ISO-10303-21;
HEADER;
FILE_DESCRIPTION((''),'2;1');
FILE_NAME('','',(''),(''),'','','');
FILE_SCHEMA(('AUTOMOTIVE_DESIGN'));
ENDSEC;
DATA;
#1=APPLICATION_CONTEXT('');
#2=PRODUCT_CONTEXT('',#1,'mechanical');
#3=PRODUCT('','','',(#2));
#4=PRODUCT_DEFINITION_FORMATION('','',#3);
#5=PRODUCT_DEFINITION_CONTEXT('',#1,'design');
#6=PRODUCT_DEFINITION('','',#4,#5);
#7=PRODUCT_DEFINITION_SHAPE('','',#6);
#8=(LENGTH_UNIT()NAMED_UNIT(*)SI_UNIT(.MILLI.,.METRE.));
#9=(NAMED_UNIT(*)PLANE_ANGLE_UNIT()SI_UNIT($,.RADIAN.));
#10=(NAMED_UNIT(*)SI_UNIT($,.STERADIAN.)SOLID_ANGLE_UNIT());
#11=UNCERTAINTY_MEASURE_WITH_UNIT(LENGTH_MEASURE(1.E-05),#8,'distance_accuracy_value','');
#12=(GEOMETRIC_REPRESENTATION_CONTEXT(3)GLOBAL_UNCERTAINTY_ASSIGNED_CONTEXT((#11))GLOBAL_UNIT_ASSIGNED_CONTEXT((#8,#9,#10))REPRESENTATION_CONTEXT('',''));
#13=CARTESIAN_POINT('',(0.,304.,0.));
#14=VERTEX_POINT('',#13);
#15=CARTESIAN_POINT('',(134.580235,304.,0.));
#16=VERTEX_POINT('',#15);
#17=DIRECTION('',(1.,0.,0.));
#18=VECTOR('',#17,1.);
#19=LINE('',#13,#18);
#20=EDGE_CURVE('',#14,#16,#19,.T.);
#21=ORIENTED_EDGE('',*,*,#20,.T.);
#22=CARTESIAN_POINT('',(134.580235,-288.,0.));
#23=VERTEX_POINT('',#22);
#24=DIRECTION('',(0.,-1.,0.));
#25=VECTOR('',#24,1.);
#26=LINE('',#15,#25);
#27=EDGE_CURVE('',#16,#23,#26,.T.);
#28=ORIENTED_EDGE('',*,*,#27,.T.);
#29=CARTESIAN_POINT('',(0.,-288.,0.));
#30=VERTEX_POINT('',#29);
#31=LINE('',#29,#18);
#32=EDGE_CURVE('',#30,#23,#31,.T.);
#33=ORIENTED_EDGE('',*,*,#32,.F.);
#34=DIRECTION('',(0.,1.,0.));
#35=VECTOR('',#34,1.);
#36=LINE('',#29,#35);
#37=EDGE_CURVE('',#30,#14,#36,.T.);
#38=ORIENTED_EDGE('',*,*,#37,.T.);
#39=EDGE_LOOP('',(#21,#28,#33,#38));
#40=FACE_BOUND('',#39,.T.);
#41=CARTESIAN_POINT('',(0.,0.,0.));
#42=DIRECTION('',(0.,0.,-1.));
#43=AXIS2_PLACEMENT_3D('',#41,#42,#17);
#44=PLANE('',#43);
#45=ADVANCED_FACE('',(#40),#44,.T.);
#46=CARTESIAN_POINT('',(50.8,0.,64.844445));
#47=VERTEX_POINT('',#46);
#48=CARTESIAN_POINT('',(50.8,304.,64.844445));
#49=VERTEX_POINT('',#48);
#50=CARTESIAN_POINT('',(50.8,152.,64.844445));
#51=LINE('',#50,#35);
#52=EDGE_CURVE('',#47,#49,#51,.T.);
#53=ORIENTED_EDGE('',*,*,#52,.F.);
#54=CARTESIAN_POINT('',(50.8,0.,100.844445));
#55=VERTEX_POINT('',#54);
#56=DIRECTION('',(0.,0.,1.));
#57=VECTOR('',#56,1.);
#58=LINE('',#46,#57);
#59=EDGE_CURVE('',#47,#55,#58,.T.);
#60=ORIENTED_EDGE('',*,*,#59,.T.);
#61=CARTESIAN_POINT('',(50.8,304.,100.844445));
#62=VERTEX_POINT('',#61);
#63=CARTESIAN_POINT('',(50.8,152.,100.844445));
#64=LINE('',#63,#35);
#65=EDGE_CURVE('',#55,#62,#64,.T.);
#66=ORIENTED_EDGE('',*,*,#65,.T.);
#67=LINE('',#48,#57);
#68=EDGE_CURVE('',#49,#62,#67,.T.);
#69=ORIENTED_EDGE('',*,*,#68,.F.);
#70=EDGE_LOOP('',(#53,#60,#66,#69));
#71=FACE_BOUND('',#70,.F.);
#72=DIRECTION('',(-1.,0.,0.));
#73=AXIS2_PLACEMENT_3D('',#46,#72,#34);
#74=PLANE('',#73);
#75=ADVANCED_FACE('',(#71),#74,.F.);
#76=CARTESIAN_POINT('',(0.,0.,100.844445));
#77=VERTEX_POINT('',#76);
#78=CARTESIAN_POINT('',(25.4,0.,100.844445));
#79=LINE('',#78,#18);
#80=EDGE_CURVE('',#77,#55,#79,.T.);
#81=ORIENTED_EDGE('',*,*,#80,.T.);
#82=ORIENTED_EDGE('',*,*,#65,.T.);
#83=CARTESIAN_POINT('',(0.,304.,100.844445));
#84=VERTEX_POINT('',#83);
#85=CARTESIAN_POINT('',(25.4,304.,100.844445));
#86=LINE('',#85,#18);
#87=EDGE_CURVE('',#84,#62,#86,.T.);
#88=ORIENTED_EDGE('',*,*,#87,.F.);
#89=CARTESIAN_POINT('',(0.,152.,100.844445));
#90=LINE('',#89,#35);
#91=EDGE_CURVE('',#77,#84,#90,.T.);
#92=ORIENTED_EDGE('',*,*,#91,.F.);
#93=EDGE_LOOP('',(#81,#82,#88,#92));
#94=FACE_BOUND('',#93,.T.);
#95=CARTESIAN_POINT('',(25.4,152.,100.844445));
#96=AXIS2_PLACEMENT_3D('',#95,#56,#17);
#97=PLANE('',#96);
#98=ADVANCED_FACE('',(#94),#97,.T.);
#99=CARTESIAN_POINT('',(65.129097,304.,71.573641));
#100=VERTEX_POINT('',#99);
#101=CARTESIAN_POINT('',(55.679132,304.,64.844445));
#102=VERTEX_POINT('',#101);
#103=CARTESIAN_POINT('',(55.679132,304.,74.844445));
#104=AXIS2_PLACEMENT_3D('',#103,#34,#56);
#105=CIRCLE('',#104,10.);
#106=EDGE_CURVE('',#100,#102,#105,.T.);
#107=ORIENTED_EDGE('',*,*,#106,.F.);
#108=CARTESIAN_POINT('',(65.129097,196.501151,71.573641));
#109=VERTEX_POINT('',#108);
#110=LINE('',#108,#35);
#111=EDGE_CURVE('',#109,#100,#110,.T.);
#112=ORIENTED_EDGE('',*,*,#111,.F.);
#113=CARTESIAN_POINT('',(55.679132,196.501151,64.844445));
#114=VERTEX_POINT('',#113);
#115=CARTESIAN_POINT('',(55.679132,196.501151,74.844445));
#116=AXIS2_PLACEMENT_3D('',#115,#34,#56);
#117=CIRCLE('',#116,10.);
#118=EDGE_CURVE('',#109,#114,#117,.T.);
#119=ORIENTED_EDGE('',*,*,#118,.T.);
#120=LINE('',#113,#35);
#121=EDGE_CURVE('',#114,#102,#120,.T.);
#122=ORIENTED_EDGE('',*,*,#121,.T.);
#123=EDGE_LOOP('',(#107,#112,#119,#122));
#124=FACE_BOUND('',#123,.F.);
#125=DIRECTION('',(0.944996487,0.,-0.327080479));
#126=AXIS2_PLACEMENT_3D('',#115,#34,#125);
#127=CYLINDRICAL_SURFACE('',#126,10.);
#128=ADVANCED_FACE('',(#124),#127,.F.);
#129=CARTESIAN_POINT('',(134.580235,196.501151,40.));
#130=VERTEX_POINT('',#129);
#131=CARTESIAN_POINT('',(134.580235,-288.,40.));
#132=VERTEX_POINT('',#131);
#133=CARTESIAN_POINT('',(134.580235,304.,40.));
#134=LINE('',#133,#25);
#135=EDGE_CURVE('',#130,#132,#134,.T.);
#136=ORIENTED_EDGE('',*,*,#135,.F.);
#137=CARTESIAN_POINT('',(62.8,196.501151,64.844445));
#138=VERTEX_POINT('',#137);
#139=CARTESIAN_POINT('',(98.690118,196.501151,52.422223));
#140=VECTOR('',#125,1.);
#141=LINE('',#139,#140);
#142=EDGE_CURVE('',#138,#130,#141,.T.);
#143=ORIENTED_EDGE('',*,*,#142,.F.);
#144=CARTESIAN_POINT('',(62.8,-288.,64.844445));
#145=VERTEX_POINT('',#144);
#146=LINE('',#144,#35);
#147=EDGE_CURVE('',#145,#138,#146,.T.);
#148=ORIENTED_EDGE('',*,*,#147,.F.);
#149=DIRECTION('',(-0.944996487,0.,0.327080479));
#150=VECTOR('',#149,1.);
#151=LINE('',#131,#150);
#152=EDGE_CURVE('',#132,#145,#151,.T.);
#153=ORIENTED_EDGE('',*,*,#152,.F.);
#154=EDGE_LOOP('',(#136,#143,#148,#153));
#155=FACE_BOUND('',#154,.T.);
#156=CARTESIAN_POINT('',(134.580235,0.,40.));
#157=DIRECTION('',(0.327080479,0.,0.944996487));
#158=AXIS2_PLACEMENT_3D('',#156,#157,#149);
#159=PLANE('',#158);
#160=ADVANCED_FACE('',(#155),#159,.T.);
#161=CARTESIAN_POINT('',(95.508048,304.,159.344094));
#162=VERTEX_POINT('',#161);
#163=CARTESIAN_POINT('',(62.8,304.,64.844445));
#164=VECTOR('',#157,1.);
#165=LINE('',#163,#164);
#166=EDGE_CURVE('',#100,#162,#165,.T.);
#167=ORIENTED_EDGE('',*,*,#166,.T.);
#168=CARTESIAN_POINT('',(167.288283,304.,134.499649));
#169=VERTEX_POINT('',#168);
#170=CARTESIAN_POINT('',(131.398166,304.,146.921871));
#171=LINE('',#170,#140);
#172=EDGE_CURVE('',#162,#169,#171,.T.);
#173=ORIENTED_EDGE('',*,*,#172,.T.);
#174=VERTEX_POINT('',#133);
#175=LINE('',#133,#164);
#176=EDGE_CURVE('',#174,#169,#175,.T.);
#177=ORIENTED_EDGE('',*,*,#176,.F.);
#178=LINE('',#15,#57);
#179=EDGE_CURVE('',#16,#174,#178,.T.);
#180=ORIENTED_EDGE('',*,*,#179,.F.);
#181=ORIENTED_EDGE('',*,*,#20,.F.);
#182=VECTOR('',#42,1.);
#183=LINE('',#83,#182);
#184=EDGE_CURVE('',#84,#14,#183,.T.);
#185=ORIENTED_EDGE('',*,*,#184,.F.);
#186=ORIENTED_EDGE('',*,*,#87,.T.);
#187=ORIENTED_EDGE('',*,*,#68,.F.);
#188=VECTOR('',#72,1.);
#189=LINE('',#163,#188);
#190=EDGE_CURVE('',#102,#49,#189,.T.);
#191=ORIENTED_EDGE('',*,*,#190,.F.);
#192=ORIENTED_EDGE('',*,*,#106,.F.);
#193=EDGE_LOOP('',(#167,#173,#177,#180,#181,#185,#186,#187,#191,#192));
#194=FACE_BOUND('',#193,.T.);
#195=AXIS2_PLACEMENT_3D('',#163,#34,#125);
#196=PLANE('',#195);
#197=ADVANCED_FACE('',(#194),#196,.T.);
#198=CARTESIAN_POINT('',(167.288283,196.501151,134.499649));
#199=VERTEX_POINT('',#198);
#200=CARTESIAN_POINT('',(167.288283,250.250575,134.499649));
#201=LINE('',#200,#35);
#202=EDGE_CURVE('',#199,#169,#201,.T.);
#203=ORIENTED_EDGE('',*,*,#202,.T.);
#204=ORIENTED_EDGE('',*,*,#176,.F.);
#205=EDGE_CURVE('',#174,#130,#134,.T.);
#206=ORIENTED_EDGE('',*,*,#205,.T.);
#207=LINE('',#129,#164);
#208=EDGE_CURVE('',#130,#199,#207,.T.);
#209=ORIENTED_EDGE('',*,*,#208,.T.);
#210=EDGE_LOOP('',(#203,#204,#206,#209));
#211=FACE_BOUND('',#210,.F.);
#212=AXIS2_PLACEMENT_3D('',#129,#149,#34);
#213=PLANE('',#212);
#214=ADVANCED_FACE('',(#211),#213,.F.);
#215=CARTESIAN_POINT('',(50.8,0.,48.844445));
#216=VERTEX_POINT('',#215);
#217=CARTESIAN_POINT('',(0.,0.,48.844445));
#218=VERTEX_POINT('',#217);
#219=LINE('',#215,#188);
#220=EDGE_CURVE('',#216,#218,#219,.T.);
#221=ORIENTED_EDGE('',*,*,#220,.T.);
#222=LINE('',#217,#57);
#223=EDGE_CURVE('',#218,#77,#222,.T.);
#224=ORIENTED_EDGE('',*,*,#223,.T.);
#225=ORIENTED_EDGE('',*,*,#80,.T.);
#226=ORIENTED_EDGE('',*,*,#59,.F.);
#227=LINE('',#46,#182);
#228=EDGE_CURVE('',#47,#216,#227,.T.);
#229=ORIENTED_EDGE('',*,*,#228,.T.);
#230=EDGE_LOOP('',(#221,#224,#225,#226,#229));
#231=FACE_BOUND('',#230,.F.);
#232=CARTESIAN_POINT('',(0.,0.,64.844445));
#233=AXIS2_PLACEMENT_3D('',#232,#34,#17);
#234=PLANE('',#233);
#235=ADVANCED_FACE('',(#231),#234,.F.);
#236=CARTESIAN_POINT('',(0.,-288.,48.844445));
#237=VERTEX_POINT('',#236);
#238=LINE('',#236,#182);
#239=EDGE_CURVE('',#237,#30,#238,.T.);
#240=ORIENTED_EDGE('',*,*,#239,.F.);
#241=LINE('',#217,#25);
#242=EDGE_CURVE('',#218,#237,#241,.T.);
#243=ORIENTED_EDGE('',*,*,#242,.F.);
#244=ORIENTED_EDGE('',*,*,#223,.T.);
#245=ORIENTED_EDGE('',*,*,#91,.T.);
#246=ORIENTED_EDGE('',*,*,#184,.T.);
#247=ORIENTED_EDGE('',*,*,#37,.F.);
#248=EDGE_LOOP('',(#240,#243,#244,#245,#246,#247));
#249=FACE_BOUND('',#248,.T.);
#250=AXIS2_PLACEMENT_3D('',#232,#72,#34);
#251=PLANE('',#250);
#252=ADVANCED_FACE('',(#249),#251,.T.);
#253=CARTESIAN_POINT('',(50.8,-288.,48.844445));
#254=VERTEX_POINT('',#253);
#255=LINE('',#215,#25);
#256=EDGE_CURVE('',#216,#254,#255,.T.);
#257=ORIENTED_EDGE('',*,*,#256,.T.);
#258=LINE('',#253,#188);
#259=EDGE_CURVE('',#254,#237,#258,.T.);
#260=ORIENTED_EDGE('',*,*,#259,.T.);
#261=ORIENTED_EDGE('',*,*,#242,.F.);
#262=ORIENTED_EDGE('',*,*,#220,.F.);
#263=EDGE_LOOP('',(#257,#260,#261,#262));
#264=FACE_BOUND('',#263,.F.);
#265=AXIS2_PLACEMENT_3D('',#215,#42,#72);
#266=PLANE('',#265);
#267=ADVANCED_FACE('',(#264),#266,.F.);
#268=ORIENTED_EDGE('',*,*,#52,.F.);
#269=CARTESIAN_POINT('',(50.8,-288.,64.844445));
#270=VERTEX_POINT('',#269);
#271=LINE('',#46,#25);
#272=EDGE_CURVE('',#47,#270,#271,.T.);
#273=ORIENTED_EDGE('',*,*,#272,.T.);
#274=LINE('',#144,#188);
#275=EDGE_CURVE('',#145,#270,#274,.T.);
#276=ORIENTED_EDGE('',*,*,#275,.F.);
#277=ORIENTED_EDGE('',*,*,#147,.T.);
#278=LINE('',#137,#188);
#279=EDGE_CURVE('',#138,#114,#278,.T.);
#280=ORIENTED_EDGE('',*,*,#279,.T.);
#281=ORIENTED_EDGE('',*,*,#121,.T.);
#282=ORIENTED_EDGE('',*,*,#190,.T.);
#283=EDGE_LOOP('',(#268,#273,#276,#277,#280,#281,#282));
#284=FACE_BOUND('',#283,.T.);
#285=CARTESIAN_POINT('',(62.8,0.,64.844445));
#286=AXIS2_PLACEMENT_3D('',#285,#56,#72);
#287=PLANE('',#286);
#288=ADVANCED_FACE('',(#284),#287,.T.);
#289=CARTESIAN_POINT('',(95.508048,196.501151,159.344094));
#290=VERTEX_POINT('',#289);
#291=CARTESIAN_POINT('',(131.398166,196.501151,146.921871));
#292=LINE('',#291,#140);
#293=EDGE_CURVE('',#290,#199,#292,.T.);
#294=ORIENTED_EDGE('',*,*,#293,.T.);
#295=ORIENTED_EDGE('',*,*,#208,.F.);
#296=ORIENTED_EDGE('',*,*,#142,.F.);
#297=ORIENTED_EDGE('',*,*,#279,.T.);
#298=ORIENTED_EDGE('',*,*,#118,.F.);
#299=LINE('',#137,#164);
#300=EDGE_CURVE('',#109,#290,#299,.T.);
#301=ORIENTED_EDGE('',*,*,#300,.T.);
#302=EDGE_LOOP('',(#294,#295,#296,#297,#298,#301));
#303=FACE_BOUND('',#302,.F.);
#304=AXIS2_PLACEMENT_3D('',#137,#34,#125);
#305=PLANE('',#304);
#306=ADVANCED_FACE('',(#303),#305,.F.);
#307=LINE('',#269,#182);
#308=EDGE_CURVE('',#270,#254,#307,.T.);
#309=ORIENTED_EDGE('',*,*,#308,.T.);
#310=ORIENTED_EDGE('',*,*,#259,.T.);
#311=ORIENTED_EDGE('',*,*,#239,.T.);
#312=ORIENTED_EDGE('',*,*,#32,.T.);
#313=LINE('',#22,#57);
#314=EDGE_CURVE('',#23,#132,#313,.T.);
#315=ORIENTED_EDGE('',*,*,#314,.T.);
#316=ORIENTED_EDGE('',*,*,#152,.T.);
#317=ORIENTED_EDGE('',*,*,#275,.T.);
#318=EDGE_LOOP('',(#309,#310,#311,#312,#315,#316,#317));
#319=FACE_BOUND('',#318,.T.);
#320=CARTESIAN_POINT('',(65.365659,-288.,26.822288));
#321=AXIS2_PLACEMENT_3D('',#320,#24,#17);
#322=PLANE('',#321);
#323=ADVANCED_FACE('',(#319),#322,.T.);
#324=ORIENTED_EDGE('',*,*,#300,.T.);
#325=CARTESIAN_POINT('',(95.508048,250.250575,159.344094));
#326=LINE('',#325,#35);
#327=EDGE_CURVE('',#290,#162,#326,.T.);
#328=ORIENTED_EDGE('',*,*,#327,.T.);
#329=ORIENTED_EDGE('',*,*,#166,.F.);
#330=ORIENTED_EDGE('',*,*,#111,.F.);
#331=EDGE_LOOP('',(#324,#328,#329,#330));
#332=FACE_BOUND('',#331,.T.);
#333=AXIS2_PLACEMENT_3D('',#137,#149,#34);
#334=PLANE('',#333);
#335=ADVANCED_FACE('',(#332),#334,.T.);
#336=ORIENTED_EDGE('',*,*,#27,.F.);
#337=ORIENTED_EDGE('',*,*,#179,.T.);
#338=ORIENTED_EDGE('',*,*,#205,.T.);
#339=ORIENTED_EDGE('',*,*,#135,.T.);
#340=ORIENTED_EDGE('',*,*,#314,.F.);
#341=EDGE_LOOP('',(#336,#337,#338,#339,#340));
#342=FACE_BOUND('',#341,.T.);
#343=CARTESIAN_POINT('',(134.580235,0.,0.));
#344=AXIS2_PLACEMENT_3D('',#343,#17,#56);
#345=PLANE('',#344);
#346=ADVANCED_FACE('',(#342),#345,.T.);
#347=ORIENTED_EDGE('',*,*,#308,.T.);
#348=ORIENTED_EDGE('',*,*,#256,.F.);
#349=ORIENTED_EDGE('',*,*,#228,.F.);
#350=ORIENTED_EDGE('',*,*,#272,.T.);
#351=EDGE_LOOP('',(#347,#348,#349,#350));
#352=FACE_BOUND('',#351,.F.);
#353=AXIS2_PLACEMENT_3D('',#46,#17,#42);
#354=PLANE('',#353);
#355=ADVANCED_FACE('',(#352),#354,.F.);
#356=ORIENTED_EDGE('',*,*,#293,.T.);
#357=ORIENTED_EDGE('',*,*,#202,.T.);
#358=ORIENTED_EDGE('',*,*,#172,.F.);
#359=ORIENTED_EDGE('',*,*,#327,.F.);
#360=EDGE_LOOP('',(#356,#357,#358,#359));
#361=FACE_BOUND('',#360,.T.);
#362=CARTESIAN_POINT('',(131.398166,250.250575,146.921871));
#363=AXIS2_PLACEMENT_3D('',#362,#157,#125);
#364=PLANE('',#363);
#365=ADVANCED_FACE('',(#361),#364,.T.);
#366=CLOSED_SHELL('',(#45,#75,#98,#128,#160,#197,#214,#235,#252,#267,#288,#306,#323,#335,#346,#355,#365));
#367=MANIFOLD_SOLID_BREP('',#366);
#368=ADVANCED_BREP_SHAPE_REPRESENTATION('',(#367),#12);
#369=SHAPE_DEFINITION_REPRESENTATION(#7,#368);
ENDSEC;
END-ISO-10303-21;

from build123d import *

# Parameters (mm, degrees)
F1_DEPTH = 288
F3_DEPTH = 304
F5_W     = 50.8
F5_H     = 304
F6_DEPTH = 36
F7_W     = 75.9582033121
F7_H     = 107.4988492727
F8_DEPTH = 100
F9_R     = 10


with BuildPart() as f1:
    # F0 (on Front) → F1 (new body)
    with BuildSketch(Plane.XZ):
        Polygon((0, 48.8444454968), (0, 0), (134.5802352905, 0), (134.5802352905, 40), (62.8, 64.8444454968), (50.8, 64.8444454968), (50.8, 48.8444454968), align=None)
    extrude(amount=F1_DEPTH)

    # F2 (on Front) → F3 (join)
    with BuildSketch(Plane.XZ):
        Polygon((0, 0), (134.5802352905, 0), (134.5802352905, 40), (62.8, 64.8444454968), (0, 64.8444454968), align=None)
    extrude(amount=-F3_DEPTH)

    # F5 (on face) → F6 (join)
    with BuildSketch(Plane.XY.offset(64.8444454968)):
        with Locations((25.4, 152)):
            Rectangle(F5_W, F5_H)
    extrude(amount=F6_DEPTH)

    # F7 (on face) → F8 (join)
    with BuildSketch(Plane(origin=(26.7612103496, 0, 77.3181263313), x_dir=(0.944996487, 0, -0.3270804787), z_dir=(0.3270804787, 0, 0.944996487))):
        with Locations((76.1155287701, 250.2505753636)):
            Rectangle(F7_W, F7_H)
    extrude(amount=F8_DEPTH)

    # F9
    f9_edges = [f1.edges().sort_by_distance(p)[0] for p in [
        (62.8, 250.250575, 64.844445),
    ]]
    fillet(f9_edges, radius=F9_R)


solid = f1.part
